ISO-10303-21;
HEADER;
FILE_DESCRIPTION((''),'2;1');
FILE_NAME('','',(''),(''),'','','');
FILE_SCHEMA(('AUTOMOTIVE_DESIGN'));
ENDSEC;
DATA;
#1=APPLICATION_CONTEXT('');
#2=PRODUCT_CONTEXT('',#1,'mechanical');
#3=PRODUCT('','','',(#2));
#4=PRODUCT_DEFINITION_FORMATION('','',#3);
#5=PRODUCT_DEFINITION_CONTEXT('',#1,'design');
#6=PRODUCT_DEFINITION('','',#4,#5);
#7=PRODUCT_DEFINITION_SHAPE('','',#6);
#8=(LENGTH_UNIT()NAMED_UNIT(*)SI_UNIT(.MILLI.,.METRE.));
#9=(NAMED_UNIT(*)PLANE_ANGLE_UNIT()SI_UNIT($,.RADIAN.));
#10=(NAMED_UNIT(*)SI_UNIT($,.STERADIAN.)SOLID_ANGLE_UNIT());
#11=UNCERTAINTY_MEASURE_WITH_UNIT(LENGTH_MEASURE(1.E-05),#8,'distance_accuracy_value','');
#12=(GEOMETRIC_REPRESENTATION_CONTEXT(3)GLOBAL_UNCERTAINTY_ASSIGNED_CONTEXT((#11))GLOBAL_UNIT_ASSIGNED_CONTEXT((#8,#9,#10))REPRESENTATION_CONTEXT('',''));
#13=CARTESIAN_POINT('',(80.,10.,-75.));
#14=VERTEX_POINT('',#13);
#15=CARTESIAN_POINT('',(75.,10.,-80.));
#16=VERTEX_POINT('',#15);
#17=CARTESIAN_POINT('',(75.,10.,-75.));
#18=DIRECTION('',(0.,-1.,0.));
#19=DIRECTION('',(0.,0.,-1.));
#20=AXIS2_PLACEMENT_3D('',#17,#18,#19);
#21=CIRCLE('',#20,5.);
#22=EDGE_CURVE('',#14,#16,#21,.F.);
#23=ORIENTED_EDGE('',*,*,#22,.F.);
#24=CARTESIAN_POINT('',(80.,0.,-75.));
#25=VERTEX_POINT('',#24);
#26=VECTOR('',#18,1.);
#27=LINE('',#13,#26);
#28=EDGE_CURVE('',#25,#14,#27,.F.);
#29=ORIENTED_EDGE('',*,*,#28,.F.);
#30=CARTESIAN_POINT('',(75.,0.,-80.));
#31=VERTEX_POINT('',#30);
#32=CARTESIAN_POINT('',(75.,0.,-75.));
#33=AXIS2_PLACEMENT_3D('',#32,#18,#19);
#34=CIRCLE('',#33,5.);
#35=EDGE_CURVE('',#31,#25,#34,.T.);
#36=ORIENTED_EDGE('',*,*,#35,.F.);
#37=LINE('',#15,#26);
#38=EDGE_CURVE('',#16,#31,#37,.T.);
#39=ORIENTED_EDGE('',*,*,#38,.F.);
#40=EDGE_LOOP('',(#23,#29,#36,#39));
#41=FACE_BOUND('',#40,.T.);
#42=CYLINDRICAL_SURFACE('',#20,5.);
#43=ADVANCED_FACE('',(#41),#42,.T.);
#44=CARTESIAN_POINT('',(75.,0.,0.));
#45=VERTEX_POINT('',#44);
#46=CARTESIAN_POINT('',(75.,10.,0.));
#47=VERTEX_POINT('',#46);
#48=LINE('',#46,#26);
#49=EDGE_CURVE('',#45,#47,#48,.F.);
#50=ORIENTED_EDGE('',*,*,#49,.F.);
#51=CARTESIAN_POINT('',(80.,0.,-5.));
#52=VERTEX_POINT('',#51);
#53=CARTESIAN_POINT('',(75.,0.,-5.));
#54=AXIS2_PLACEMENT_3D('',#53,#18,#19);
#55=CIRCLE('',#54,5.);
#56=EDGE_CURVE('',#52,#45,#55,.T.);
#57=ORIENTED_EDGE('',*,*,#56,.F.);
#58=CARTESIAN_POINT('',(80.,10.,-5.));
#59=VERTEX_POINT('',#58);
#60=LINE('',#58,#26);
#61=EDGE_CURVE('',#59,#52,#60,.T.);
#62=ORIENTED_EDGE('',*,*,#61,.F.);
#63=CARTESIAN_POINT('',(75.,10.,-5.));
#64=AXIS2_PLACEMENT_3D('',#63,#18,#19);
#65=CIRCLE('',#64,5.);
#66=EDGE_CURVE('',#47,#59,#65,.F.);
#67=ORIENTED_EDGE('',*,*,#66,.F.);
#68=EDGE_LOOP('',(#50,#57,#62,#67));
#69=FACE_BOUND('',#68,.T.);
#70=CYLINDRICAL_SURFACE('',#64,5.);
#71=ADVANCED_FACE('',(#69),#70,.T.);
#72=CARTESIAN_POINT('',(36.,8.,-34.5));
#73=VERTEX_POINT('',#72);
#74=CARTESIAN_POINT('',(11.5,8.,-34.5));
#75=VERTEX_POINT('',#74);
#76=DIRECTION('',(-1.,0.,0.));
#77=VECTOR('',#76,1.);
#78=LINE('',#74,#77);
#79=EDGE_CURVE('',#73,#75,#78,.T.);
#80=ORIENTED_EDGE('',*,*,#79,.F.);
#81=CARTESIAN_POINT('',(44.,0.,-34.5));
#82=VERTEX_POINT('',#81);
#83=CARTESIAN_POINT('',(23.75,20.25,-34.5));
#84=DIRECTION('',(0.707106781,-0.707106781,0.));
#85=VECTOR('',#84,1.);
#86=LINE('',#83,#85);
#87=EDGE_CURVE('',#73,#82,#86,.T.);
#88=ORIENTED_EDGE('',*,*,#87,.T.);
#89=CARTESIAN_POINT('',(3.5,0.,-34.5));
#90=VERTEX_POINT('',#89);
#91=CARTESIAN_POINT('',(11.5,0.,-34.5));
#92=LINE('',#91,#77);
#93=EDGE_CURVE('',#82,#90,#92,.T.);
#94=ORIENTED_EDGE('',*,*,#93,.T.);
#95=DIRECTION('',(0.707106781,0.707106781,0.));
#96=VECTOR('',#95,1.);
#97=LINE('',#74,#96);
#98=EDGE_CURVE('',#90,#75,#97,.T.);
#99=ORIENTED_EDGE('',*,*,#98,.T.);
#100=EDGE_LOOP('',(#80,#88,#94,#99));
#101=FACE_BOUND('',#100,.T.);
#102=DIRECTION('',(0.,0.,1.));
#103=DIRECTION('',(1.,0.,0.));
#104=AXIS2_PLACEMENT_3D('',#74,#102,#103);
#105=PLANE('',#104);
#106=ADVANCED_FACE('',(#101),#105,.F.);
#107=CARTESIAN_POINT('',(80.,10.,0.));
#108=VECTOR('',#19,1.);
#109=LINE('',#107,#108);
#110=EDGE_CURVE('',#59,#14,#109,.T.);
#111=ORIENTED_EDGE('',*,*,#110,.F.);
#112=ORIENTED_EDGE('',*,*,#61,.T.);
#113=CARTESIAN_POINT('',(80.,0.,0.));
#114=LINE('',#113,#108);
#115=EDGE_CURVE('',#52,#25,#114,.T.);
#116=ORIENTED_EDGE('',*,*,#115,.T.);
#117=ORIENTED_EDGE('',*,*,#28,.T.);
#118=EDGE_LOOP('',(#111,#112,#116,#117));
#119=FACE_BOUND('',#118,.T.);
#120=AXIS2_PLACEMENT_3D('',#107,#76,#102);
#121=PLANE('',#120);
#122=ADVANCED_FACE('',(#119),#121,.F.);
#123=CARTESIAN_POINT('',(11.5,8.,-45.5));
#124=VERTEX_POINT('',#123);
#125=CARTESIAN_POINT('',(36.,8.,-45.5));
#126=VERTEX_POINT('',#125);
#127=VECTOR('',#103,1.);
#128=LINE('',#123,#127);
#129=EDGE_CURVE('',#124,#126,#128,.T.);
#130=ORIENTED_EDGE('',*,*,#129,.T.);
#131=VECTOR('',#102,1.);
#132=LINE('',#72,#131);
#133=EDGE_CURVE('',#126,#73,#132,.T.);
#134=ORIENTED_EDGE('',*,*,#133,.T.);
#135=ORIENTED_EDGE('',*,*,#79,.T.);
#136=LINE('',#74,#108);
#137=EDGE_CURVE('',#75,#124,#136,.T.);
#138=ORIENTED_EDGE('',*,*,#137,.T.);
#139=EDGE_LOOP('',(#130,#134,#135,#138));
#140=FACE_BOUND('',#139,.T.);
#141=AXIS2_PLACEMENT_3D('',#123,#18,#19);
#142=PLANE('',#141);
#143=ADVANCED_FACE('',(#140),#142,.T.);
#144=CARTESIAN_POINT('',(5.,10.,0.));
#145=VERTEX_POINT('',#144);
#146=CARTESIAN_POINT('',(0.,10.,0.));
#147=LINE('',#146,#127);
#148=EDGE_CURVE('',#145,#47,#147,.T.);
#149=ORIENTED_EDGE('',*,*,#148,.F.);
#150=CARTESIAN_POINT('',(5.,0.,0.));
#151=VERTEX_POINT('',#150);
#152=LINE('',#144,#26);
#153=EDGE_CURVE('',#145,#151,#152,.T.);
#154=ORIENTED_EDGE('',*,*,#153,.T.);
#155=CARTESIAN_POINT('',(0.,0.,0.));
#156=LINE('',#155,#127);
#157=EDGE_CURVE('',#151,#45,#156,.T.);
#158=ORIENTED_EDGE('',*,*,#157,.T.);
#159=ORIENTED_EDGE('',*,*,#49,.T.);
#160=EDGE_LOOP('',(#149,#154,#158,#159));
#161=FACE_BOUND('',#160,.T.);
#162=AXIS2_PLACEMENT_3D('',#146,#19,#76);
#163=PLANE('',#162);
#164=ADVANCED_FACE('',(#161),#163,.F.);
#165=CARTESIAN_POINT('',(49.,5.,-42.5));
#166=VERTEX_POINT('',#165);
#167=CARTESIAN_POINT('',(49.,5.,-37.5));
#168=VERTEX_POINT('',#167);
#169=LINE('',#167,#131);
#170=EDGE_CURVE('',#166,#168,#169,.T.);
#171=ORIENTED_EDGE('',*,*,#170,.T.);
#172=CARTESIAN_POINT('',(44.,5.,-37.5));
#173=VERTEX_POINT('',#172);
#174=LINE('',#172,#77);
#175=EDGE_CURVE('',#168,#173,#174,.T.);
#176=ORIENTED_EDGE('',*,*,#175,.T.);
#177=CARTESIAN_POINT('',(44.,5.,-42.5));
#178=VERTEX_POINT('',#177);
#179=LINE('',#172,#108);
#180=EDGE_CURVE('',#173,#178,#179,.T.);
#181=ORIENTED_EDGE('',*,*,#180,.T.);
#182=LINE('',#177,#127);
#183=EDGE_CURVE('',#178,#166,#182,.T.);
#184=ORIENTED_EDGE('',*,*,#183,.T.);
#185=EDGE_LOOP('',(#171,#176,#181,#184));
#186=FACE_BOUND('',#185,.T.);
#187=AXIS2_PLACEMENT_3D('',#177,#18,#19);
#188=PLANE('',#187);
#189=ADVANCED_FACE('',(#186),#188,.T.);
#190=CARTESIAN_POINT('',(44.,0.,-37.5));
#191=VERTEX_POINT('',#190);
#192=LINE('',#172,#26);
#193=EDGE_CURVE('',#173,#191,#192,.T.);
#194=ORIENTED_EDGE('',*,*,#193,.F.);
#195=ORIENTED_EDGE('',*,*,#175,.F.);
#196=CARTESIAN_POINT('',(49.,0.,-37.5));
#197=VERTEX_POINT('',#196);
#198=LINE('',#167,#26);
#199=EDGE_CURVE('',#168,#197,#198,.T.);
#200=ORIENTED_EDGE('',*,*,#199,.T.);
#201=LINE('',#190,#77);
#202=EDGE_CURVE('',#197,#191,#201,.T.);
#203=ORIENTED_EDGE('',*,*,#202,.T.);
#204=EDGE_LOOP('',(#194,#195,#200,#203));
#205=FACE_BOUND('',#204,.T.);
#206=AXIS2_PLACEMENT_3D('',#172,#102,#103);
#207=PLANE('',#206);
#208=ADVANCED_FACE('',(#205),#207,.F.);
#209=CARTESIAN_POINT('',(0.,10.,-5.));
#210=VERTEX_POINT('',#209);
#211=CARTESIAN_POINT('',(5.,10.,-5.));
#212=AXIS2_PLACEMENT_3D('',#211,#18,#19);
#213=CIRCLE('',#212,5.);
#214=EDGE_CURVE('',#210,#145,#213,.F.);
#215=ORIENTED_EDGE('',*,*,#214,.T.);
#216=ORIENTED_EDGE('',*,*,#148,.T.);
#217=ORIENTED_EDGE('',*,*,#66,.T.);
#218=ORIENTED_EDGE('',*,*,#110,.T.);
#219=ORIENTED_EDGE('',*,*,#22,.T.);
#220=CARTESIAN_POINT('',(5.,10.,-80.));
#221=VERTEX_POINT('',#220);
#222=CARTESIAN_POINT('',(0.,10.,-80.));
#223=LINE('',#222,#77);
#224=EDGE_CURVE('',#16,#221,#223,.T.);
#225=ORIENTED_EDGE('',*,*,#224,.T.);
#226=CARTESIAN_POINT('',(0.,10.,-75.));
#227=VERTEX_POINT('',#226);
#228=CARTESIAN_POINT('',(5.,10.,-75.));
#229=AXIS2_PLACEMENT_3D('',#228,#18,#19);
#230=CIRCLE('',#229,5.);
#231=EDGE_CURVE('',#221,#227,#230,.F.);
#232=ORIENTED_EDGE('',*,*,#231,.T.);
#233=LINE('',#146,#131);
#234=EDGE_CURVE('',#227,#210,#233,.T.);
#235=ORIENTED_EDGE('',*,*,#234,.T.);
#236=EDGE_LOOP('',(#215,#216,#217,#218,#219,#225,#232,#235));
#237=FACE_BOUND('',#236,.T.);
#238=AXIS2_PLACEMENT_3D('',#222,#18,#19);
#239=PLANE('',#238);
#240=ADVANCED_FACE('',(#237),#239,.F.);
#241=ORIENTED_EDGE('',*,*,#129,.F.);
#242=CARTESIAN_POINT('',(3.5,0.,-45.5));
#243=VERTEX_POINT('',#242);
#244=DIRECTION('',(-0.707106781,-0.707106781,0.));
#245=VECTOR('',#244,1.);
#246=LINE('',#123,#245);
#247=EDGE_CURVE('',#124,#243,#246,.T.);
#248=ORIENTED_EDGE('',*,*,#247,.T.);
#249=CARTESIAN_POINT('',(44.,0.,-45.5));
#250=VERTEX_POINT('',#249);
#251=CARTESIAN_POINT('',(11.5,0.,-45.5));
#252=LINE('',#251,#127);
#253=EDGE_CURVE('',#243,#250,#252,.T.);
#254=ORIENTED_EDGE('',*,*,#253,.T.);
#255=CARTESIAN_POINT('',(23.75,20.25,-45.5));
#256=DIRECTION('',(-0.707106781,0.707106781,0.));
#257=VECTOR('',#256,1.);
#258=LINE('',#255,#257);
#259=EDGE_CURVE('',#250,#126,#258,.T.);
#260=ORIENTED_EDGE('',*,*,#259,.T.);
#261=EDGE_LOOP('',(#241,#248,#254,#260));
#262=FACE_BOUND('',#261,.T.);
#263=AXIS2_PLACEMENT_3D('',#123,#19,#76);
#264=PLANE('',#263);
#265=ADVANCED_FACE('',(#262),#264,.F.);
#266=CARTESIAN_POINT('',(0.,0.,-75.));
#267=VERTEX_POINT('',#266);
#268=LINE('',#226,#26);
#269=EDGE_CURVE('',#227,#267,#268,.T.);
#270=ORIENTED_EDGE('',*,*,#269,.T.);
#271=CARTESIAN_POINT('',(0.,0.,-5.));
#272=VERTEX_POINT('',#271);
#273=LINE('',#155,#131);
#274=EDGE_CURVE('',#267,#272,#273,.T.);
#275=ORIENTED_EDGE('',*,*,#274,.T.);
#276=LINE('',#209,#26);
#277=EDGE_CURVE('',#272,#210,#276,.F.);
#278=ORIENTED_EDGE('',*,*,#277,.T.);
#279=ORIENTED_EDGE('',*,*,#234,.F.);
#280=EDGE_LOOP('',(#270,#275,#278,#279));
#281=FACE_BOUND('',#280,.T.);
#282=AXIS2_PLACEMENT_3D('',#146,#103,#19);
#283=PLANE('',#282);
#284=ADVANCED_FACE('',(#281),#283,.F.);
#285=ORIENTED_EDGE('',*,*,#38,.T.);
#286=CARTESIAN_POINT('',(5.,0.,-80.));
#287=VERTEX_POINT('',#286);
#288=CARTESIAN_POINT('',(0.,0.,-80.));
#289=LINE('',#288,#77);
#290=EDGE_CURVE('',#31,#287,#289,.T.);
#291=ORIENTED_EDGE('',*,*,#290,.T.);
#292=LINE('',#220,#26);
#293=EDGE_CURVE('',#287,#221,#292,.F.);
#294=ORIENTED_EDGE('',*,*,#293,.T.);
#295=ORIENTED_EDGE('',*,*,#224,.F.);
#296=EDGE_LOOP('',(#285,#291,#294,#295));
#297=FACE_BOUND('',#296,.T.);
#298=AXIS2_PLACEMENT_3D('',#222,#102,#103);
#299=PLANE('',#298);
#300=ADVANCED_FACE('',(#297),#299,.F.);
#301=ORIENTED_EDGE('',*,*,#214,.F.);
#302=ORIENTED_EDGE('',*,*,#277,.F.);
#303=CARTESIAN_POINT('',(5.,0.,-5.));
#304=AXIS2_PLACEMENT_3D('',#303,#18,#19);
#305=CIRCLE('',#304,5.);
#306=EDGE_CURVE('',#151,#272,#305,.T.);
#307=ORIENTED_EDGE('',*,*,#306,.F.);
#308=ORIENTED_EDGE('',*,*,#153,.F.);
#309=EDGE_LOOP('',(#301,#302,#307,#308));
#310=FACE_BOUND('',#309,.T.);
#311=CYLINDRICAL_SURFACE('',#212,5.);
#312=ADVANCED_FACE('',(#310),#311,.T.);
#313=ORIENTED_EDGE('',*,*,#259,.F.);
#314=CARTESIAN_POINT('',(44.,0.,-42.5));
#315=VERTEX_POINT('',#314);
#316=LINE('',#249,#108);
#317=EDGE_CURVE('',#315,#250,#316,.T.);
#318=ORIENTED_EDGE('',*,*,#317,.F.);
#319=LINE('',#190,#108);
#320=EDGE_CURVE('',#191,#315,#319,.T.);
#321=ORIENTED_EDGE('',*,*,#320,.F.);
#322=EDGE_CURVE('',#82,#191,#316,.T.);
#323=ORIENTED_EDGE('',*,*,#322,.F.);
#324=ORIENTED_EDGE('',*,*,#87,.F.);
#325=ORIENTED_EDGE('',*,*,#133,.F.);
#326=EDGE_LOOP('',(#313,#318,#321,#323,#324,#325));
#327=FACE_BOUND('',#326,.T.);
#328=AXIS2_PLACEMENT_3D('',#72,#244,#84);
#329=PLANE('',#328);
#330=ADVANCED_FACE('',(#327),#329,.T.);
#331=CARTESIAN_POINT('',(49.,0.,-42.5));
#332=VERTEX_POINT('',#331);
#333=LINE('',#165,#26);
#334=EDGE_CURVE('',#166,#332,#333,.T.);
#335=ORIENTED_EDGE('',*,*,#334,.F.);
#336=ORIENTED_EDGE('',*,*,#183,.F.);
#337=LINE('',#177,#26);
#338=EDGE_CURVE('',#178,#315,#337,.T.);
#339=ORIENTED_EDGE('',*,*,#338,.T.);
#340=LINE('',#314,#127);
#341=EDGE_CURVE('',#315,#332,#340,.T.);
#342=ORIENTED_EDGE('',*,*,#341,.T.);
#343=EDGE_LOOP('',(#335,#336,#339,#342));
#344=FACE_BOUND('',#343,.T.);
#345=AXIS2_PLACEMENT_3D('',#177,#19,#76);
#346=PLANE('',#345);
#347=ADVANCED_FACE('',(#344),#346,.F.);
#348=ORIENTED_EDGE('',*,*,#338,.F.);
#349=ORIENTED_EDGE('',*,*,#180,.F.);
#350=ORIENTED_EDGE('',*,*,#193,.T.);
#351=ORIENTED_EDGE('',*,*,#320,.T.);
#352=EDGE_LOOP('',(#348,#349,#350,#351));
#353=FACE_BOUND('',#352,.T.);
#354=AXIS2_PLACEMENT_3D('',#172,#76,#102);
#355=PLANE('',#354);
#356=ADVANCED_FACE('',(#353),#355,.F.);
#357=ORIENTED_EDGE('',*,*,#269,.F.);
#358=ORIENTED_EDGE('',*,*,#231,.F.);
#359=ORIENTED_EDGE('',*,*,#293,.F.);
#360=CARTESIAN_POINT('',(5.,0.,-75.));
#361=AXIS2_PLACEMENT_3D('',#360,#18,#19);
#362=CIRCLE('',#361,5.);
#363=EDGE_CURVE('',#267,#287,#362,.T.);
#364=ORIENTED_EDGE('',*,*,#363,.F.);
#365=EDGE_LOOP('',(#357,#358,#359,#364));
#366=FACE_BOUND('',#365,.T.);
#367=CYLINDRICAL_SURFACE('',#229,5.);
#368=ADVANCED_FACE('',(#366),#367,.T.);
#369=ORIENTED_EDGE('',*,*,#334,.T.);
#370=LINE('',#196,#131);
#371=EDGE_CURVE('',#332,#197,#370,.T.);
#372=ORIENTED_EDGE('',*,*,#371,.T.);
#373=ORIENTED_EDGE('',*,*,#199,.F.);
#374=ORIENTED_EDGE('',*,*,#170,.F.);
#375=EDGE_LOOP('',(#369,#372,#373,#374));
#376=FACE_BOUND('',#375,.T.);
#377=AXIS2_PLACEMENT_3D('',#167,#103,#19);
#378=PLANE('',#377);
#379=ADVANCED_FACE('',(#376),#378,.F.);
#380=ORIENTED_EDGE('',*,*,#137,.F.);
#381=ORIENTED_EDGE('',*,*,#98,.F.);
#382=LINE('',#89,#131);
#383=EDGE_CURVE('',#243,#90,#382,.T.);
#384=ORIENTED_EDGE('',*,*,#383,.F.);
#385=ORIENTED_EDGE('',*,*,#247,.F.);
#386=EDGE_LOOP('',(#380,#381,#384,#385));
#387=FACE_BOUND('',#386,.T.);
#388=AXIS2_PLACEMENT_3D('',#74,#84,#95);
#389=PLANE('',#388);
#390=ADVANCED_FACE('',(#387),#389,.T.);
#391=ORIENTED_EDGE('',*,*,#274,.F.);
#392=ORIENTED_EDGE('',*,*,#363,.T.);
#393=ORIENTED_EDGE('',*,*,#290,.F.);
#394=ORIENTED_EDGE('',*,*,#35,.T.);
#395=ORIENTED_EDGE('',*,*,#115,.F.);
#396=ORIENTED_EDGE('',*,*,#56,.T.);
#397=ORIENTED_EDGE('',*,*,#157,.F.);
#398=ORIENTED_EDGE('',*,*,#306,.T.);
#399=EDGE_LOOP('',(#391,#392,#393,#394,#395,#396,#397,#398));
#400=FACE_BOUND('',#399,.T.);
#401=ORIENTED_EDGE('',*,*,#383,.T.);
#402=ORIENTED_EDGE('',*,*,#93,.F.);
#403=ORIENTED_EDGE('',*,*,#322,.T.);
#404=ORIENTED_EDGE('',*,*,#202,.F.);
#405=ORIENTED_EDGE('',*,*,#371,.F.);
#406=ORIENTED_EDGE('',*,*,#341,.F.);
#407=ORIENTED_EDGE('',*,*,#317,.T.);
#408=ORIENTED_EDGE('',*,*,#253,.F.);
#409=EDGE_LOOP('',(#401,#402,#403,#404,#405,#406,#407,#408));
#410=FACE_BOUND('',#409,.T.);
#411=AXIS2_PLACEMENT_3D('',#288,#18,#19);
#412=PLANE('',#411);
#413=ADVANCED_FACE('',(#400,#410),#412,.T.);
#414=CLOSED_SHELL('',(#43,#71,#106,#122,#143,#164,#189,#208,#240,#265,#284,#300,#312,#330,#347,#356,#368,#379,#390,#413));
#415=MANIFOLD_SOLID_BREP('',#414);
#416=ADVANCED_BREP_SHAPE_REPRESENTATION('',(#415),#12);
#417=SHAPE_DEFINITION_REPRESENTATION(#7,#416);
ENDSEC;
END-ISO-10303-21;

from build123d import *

# Parameters (mm, degrees)
ESQUISSE1_W             = 80
ESQUISSE1_H             = 80
EXTRUSION1_DEPTH        = 10
ESQUISSE2_W             = 24.5
ESQUISSE2_H             = 11
ENL_V_MAT_EXTRU_1_DEPTH = 8
CHANFREIN1_SIZE         = 8
CHANFREIN2_SIZE         = 8
CONG_1_R                = 5
ESQUISSE3_W             = 5
ESQUISSE3_H             = 5
ENL_V_MAT_EXTRU_2_DEPTH = 5


with BuildPart() as part:
    # Esquisse1 → Extrusion1 (new body)
    with BuildSketch(Plane(origin=(0, 0, 0), x_dir=(1, 0, 0), z_dir=(0, 1, 0))):
        with Locations((40, 40)):
            Rectangle(ESQUISSE1_W, ESQUISSE1_H)
    extrude(amount=EXTRUSION1_DEPTH)

    # Esquisse2 → Enlèv. mat.-Extru.1 (cut)
    with BuildSketch(Plane.XZ):
        with Locations((23.75, -40)):
            Rectangle(ESQUISSE2_W, ESQUISSE2_H)
    extrude(amount=-ENL_V_MAT_EXTRU_1_DEPTH, mode=Mode.SUBTRACT)

    # Chanfrein1
    chanfrein1_edges = [part.edges().sort_by_distance(p)[0] for p in [
        (11.5, 0, -40),
    ]]
    chamfer(chanfrein1_edges, length=CHANFREIN1_SIZE - 0.0001)  # a hair under: the kernel refuses the full size

    # Chanfrein2
    chanfrein2_edges = [part.edges().sort_by_distance(p)[0] for p in [
        (36, 0, -40),
    ]]
    chamfer(chanfrein2_edges, length=CHANFREIN2_SIZE - 0.0001)  # a hair under: the kernel refuses the full size

    # Congé1
    cong_1_edges = [part.edges().sort_by_distance(p)[0] for p in [
        (0, 5, -80),
        (80, 5, -80),
        (80, 5, 0),
        (0, 5, 0),
    ]]
    fillet(cong_1_edges, radius=CONG_1_R)

    # Esquisse3 → Enlèv. mat.-Extru.2 (cut)
    with BuildSketch(Plane.XZ):
        with Locations((46.5, -40)):
            Rectangle(ESQUISSE3_W, ESQUISSE3_H)
    extrude(amount=-ENL_V_MAT_EXTRU_2_DEPTH, mode=Mode.SUBTRACT)


solid = part.part
